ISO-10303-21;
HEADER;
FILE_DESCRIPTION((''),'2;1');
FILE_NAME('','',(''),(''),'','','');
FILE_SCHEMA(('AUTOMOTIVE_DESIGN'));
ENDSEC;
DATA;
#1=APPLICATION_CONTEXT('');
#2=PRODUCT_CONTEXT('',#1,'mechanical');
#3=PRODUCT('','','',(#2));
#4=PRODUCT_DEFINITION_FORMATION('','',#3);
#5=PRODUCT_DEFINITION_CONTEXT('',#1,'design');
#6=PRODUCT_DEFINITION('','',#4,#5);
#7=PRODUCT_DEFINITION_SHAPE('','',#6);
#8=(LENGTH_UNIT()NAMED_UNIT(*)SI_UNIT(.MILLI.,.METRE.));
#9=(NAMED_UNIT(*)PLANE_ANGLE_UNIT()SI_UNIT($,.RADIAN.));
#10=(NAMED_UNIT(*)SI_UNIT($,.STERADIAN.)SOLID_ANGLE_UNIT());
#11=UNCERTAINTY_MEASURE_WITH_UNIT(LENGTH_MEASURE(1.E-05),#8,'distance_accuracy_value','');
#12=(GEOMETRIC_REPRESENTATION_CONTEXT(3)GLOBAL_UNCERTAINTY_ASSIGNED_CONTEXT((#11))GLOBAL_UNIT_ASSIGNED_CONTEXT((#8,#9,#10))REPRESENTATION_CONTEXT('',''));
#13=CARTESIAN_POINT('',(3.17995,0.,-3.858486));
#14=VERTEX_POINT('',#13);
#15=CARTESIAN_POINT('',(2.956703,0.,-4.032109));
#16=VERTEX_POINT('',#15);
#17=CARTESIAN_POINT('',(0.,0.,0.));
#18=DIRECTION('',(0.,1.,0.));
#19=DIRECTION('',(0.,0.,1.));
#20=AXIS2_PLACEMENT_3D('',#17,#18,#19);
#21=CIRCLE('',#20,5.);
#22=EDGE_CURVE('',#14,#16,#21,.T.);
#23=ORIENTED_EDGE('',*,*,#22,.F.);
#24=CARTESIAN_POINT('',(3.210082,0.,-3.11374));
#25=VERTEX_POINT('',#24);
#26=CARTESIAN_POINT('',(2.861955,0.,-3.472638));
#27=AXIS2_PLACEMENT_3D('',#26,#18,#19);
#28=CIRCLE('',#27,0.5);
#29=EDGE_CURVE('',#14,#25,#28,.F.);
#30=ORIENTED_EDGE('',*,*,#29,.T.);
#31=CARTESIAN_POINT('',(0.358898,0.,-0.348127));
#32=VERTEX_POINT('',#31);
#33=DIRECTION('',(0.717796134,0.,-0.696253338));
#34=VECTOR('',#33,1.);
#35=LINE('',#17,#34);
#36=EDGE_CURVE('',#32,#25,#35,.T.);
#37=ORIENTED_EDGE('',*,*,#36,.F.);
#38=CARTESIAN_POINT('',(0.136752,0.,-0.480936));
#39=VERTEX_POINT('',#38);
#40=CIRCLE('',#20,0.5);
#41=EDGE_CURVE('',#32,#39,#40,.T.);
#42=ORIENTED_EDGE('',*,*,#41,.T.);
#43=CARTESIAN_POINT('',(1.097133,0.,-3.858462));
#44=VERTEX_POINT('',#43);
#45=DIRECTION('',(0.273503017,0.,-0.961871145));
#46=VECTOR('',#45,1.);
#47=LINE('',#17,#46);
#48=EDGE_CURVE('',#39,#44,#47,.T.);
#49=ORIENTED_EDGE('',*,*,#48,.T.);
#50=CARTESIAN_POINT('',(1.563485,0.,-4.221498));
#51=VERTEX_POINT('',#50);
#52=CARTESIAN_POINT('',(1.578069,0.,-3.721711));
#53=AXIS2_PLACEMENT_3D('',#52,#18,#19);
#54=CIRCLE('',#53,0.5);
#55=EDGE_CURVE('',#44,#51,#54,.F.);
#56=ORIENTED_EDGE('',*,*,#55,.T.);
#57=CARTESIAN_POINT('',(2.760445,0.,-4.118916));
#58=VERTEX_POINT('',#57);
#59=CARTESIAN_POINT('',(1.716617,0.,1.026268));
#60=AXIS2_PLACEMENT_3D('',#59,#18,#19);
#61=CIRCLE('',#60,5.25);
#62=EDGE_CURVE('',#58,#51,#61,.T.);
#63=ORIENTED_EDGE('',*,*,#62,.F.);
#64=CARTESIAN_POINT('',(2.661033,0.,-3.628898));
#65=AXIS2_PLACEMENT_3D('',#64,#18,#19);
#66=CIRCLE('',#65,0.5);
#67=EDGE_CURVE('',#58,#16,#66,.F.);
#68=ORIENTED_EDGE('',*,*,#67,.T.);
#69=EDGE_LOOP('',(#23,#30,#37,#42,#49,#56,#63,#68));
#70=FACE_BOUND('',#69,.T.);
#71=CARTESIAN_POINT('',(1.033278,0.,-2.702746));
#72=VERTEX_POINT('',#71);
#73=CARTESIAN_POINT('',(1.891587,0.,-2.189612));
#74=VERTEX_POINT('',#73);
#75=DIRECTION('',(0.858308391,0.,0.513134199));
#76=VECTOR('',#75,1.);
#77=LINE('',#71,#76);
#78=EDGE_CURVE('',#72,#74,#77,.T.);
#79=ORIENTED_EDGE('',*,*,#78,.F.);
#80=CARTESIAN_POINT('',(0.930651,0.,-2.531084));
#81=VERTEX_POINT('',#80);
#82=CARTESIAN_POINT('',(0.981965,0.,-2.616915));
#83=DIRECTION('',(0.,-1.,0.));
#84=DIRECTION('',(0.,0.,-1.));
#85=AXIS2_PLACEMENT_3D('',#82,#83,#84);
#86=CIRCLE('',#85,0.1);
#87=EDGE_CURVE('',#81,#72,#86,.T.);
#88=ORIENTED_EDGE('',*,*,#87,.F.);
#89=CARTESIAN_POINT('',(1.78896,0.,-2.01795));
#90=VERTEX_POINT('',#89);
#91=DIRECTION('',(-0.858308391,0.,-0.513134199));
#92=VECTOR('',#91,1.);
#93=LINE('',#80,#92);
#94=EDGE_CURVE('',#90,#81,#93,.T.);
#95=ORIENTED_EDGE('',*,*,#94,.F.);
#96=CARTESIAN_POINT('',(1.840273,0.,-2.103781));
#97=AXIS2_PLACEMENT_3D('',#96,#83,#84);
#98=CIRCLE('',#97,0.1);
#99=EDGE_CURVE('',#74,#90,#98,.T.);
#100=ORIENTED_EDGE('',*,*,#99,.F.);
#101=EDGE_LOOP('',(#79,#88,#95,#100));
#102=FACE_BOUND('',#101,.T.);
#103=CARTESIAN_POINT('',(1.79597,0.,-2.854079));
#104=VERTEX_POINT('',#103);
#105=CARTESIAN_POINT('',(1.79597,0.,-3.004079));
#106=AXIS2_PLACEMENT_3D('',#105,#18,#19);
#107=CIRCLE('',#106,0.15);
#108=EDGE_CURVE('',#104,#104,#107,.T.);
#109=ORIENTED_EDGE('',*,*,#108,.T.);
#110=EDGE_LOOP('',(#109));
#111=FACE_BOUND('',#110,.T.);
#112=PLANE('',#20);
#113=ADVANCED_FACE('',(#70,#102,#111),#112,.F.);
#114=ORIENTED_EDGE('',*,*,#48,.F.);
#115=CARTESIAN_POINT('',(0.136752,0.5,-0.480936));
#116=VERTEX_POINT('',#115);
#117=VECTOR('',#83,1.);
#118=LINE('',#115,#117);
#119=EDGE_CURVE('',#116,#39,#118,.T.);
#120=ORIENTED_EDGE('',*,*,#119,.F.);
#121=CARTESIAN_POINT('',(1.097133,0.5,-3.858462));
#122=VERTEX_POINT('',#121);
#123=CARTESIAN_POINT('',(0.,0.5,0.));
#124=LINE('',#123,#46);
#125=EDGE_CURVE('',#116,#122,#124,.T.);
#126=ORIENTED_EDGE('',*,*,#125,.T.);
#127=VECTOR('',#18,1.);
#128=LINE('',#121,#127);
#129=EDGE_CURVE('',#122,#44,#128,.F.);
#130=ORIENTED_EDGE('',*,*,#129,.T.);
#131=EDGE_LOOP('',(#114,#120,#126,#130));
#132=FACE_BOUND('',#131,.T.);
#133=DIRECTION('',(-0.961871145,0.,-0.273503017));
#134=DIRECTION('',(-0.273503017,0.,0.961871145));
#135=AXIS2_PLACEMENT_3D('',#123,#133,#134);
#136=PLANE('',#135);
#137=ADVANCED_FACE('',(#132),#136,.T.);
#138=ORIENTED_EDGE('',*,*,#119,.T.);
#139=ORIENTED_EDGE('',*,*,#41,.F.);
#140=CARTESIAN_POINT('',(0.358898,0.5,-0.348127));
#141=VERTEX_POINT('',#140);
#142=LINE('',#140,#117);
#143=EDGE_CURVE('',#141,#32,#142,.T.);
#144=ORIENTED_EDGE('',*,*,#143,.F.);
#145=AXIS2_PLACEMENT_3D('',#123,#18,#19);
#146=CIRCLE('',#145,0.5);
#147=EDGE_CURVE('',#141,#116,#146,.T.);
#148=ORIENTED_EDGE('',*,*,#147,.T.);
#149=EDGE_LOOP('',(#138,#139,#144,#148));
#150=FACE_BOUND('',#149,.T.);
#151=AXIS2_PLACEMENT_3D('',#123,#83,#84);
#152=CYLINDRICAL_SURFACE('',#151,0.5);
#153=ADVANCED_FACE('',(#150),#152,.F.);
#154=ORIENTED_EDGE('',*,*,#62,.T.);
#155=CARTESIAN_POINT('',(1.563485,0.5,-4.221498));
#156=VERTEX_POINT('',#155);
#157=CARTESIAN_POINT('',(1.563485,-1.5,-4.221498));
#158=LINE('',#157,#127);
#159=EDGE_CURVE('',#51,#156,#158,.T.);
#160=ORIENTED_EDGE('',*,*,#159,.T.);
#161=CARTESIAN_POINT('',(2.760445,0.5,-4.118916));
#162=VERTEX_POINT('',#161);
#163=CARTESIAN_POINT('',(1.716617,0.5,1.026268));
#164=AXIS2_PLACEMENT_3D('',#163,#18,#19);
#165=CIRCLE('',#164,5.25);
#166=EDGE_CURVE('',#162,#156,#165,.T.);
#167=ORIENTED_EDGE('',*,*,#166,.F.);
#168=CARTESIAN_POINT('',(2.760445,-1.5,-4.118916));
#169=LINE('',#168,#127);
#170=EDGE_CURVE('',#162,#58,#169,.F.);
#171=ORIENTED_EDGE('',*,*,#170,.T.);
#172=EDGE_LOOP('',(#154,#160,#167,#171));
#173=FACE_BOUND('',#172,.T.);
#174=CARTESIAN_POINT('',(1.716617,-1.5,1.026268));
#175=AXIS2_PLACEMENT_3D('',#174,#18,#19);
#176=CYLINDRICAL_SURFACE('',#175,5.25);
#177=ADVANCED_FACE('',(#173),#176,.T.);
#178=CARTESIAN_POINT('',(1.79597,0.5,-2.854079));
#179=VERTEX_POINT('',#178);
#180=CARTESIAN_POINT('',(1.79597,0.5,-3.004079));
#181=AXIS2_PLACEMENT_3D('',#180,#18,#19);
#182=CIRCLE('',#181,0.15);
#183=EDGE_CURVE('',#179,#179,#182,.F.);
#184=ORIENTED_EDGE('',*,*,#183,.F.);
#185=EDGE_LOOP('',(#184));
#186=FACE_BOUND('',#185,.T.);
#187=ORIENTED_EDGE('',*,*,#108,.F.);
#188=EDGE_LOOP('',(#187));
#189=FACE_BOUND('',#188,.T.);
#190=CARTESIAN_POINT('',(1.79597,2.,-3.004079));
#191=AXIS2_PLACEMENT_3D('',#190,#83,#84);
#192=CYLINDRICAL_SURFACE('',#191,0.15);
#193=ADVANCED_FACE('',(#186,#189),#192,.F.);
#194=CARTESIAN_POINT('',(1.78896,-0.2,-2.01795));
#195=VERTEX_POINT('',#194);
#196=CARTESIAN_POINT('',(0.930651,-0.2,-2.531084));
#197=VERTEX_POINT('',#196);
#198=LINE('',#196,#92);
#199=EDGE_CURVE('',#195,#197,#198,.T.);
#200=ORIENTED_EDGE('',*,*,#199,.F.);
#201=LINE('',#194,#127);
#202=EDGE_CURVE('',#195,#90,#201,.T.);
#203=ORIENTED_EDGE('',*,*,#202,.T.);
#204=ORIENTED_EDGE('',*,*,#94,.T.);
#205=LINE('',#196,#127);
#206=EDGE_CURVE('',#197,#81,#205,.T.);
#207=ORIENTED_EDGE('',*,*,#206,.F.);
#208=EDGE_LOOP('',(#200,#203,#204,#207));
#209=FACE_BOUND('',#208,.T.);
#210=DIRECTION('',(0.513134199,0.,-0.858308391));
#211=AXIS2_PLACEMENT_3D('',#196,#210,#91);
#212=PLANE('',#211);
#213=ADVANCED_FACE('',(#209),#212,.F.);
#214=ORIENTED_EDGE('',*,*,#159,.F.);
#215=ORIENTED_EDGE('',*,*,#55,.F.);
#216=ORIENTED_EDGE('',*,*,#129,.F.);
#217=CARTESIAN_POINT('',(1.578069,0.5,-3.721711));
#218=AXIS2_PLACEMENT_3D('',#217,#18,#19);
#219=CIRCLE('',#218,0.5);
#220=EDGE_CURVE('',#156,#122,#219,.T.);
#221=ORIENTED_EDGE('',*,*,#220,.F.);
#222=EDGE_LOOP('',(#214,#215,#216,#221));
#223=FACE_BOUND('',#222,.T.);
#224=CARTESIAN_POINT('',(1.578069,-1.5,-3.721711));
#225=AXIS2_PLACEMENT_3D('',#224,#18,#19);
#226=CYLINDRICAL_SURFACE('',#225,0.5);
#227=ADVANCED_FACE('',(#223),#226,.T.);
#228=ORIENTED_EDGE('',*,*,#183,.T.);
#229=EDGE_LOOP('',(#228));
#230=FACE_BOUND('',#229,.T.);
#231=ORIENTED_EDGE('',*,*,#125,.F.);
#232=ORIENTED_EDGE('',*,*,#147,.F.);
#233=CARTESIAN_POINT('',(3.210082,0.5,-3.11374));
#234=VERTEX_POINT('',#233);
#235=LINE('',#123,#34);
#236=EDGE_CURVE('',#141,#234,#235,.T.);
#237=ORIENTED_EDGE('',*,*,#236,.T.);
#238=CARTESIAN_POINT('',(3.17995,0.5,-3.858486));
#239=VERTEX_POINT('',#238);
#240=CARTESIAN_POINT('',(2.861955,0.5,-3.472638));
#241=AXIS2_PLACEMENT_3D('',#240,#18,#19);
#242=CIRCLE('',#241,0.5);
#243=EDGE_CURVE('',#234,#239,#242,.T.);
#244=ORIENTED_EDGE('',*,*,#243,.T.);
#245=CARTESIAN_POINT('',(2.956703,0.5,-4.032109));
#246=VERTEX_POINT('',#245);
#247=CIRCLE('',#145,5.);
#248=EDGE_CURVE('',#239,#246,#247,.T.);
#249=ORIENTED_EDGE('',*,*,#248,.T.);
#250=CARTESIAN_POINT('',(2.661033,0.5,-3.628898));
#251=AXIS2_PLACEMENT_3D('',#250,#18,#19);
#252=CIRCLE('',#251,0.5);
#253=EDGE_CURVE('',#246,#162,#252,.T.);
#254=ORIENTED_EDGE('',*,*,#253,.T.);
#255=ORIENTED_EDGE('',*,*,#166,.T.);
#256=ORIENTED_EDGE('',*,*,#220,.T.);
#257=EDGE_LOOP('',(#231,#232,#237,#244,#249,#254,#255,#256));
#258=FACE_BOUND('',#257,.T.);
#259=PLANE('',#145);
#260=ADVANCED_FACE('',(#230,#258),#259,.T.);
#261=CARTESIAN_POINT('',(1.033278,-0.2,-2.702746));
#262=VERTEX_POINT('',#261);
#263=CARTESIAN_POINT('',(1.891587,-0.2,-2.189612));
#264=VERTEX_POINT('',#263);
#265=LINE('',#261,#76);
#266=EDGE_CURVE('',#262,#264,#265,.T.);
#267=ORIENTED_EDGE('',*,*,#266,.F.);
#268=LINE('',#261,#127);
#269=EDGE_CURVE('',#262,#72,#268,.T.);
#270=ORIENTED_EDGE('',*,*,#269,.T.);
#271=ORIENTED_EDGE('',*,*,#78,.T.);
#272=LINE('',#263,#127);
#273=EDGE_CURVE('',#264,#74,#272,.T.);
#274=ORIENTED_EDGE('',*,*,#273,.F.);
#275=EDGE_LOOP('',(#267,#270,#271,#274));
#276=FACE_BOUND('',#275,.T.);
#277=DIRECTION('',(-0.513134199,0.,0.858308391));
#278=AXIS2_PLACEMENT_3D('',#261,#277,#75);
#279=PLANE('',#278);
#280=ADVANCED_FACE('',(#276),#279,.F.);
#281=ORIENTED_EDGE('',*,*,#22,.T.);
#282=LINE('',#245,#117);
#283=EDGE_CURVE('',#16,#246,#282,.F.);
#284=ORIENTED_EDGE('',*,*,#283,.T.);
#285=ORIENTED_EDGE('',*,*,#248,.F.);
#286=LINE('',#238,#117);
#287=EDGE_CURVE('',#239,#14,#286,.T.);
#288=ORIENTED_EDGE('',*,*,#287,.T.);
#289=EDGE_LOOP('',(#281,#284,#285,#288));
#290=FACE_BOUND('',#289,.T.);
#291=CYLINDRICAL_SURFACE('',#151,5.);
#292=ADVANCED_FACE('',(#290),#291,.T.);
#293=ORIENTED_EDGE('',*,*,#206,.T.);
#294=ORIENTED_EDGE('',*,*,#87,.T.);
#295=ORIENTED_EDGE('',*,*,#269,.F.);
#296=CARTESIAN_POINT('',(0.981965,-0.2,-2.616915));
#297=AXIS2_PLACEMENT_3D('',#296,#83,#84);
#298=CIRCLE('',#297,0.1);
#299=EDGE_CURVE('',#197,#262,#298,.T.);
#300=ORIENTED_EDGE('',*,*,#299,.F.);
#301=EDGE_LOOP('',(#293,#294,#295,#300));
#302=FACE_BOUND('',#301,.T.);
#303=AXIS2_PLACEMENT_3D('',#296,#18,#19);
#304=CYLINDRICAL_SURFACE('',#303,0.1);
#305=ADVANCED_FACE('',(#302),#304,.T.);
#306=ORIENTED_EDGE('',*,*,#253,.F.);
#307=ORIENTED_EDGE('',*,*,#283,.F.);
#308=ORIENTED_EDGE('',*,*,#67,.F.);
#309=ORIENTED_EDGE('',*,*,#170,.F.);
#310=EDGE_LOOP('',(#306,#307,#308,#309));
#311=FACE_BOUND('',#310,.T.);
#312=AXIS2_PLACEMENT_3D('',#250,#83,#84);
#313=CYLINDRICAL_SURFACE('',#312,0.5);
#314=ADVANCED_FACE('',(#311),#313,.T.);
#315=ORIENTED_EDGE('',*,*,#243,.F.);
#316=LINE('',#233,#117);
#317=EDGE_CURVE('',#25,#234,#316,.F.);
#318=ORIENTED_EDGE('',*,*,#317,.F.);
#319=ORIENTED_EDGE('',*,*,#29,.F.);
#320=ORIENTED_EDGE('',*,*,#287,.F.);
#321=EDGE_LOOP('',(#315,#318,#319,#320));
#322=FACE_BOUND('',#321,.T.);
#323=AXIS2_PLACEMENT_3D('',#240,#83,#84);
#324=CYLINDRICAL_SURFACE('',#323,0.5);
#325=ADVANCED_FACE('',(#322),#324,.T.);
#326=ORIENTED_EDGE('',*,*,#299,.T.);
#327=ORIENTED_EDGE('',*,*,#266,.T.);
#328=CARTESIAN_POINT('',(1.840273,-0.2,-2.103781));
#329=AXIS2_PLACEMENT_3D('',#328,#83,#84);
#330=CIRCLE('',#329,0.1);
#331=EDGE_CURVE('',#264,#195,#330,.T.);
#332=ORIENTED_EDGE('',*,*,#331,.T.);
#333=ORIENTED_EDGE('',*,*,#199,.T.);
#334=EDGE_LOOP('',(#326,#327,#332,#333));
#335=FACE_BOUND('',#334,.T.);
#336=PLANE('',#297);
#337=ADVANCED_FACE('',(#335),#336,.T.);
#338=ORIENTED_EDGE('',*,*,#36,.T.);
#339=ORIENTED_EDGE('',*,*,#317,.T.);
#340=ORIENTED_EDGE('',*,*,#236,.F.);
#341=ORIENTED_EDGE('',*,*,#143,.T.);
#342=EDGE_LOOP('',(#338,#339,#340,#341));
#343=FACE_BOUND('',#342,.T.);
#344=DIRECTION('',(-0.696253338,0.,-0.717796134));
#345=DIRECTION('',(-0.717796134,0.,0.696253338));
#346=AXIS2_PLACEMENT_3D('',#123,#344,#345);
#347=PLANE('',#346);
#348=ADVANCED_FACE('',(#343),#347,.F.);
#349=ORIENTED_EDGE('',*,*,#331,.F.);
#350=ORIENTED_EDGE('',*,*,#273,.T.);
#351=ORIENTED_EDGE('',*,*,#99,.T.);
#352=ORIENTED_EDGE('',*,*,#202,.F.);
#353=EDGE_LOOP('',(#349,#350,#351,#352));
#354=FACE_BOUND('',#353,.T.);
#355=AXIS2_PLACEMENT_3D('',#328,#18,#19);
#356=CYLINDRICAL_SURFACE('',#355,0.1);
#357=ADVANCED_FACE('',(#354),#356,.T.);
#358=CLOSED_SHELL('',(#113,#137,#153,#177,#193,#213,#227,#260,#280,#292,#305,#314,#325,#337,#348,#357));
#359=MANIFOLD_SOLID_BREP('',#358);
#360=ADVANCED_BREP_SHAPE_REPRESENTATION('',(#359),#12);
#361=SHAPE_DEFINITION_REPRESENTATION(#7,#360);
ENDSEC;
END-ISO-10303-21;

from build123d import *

# Parameters (mm, degrees)
BOSS_EXTRUDE1_DEPTH = 0.5
SKETCH2_R           = 0.15
CUT_EXTRUDE1_DEPTH  = 2
CUT_EXTRUDE2_START  = -0.5
CUT_EXTRUDE2_DEPTH  = 0.5
FILLET2_R           = 0.5
BOSS_EXTRUDE2_DEPTH = 0.2


# Read off the part's stored shape, not the designer's step: Cut-Extrude2
with BuildPart() as part:
    # Sketch1 → Boss-Extrude1 (new body)
    with BuildSketch(Plane(origin=(0, 0, 0), x_dir=(1, 0, 0), z_dir=(0, 1, 0))):
        with BuildLine():
            ThreePointArc((0.136751509, 0.480935572), (0.2565671, 0.429154195), (0.358898067, 0.348126669))
            Line((0.358898067, 0.348126669), (3.588980668, 3.48126669))
            ThreePointArc((3.588980668, 3.48126669), (2.565670997, 4.291541953), (1.367515087, 4.809355725))
            Line((1.367515087, 4.809355725), (0.136751509, 0.480935572))
        make_face()
    extrude(amount=BOSS_EXTRUDE1_DEPTH)

    # Sketch2 → Cut-Extrude1 (cut)
    with BuildSketch(Plane(origin=(0, 0, 0), x_dir=(1, 0, 0), z_dir=(0, 1, 0))):
        with Locations(Location((1.795969698, 3.004079367, 0), (0, 0, 270))):
            Circle(SKETCH2_R)
    extrude(amount=CUT_EXTRUDE1_DEPTH, mode=Mode.SUBTRACT)

    # Cut-Extrude2 outline → Cut-Extrude2 (cut)
    with BuildSketch(Plane(origin=(0, 0.5, 0), x_dir=(1, 0, 0), z_dir=(0, 1, 0)).offset(CUT_EXTRUDE2_START)):
        with BuildLine():
            ThreePointArc((1.193568814, 4.197611464), (2.034611336, 4.214092225), (2.867489845, 4.096034911))
            ThreePointArc((2.867489845, 4.096034911), (2.14732935, 4.515415447), (1.367515087, 4.809355725))
            Line((1.367515087, 4.809355725), (1.193568814, 4.197611464))
        make_face()
    extrude(amount=CUT_EXTRUDE2_DEPTH, mode=Mode.SUBTRACT)

    # Fillet2
    fillet2_edges = [part.edges().sort_by_distance(p)[0] for p in [
        (1.193568814, 0.25, -4.197611464),
        (2.867489845, 0.25, -4.096034911),
        (3.588980668, 0.25, -3.48126669),
    ]]
    fillet(fillet2_edges, radius=FILLET2_R)

    # Sketch4 → Boss-Extrude2 (add)
    with BuildSketch(Plane.XZ):
        with BuildLine():
            Line((0.930651433, -2.531084335), (1.788959824, -2.017950136))
            ThreePointArc((1.788959824, -2.017950136), (1.926104083, -2.052467555), (1.891586663, -2.189611814))
            Line((1.891586663, -2.189611814), (1.033278273, -2.702746013))
            ThreePointArc((1.033278273, -2.702746013), (0.896134014, -2.668228594), (0.930651433, -2.531084335))
        make_face()
    extrude(amount=BOSS_EXTRUDE2_DEPTH)


solid = part.part
